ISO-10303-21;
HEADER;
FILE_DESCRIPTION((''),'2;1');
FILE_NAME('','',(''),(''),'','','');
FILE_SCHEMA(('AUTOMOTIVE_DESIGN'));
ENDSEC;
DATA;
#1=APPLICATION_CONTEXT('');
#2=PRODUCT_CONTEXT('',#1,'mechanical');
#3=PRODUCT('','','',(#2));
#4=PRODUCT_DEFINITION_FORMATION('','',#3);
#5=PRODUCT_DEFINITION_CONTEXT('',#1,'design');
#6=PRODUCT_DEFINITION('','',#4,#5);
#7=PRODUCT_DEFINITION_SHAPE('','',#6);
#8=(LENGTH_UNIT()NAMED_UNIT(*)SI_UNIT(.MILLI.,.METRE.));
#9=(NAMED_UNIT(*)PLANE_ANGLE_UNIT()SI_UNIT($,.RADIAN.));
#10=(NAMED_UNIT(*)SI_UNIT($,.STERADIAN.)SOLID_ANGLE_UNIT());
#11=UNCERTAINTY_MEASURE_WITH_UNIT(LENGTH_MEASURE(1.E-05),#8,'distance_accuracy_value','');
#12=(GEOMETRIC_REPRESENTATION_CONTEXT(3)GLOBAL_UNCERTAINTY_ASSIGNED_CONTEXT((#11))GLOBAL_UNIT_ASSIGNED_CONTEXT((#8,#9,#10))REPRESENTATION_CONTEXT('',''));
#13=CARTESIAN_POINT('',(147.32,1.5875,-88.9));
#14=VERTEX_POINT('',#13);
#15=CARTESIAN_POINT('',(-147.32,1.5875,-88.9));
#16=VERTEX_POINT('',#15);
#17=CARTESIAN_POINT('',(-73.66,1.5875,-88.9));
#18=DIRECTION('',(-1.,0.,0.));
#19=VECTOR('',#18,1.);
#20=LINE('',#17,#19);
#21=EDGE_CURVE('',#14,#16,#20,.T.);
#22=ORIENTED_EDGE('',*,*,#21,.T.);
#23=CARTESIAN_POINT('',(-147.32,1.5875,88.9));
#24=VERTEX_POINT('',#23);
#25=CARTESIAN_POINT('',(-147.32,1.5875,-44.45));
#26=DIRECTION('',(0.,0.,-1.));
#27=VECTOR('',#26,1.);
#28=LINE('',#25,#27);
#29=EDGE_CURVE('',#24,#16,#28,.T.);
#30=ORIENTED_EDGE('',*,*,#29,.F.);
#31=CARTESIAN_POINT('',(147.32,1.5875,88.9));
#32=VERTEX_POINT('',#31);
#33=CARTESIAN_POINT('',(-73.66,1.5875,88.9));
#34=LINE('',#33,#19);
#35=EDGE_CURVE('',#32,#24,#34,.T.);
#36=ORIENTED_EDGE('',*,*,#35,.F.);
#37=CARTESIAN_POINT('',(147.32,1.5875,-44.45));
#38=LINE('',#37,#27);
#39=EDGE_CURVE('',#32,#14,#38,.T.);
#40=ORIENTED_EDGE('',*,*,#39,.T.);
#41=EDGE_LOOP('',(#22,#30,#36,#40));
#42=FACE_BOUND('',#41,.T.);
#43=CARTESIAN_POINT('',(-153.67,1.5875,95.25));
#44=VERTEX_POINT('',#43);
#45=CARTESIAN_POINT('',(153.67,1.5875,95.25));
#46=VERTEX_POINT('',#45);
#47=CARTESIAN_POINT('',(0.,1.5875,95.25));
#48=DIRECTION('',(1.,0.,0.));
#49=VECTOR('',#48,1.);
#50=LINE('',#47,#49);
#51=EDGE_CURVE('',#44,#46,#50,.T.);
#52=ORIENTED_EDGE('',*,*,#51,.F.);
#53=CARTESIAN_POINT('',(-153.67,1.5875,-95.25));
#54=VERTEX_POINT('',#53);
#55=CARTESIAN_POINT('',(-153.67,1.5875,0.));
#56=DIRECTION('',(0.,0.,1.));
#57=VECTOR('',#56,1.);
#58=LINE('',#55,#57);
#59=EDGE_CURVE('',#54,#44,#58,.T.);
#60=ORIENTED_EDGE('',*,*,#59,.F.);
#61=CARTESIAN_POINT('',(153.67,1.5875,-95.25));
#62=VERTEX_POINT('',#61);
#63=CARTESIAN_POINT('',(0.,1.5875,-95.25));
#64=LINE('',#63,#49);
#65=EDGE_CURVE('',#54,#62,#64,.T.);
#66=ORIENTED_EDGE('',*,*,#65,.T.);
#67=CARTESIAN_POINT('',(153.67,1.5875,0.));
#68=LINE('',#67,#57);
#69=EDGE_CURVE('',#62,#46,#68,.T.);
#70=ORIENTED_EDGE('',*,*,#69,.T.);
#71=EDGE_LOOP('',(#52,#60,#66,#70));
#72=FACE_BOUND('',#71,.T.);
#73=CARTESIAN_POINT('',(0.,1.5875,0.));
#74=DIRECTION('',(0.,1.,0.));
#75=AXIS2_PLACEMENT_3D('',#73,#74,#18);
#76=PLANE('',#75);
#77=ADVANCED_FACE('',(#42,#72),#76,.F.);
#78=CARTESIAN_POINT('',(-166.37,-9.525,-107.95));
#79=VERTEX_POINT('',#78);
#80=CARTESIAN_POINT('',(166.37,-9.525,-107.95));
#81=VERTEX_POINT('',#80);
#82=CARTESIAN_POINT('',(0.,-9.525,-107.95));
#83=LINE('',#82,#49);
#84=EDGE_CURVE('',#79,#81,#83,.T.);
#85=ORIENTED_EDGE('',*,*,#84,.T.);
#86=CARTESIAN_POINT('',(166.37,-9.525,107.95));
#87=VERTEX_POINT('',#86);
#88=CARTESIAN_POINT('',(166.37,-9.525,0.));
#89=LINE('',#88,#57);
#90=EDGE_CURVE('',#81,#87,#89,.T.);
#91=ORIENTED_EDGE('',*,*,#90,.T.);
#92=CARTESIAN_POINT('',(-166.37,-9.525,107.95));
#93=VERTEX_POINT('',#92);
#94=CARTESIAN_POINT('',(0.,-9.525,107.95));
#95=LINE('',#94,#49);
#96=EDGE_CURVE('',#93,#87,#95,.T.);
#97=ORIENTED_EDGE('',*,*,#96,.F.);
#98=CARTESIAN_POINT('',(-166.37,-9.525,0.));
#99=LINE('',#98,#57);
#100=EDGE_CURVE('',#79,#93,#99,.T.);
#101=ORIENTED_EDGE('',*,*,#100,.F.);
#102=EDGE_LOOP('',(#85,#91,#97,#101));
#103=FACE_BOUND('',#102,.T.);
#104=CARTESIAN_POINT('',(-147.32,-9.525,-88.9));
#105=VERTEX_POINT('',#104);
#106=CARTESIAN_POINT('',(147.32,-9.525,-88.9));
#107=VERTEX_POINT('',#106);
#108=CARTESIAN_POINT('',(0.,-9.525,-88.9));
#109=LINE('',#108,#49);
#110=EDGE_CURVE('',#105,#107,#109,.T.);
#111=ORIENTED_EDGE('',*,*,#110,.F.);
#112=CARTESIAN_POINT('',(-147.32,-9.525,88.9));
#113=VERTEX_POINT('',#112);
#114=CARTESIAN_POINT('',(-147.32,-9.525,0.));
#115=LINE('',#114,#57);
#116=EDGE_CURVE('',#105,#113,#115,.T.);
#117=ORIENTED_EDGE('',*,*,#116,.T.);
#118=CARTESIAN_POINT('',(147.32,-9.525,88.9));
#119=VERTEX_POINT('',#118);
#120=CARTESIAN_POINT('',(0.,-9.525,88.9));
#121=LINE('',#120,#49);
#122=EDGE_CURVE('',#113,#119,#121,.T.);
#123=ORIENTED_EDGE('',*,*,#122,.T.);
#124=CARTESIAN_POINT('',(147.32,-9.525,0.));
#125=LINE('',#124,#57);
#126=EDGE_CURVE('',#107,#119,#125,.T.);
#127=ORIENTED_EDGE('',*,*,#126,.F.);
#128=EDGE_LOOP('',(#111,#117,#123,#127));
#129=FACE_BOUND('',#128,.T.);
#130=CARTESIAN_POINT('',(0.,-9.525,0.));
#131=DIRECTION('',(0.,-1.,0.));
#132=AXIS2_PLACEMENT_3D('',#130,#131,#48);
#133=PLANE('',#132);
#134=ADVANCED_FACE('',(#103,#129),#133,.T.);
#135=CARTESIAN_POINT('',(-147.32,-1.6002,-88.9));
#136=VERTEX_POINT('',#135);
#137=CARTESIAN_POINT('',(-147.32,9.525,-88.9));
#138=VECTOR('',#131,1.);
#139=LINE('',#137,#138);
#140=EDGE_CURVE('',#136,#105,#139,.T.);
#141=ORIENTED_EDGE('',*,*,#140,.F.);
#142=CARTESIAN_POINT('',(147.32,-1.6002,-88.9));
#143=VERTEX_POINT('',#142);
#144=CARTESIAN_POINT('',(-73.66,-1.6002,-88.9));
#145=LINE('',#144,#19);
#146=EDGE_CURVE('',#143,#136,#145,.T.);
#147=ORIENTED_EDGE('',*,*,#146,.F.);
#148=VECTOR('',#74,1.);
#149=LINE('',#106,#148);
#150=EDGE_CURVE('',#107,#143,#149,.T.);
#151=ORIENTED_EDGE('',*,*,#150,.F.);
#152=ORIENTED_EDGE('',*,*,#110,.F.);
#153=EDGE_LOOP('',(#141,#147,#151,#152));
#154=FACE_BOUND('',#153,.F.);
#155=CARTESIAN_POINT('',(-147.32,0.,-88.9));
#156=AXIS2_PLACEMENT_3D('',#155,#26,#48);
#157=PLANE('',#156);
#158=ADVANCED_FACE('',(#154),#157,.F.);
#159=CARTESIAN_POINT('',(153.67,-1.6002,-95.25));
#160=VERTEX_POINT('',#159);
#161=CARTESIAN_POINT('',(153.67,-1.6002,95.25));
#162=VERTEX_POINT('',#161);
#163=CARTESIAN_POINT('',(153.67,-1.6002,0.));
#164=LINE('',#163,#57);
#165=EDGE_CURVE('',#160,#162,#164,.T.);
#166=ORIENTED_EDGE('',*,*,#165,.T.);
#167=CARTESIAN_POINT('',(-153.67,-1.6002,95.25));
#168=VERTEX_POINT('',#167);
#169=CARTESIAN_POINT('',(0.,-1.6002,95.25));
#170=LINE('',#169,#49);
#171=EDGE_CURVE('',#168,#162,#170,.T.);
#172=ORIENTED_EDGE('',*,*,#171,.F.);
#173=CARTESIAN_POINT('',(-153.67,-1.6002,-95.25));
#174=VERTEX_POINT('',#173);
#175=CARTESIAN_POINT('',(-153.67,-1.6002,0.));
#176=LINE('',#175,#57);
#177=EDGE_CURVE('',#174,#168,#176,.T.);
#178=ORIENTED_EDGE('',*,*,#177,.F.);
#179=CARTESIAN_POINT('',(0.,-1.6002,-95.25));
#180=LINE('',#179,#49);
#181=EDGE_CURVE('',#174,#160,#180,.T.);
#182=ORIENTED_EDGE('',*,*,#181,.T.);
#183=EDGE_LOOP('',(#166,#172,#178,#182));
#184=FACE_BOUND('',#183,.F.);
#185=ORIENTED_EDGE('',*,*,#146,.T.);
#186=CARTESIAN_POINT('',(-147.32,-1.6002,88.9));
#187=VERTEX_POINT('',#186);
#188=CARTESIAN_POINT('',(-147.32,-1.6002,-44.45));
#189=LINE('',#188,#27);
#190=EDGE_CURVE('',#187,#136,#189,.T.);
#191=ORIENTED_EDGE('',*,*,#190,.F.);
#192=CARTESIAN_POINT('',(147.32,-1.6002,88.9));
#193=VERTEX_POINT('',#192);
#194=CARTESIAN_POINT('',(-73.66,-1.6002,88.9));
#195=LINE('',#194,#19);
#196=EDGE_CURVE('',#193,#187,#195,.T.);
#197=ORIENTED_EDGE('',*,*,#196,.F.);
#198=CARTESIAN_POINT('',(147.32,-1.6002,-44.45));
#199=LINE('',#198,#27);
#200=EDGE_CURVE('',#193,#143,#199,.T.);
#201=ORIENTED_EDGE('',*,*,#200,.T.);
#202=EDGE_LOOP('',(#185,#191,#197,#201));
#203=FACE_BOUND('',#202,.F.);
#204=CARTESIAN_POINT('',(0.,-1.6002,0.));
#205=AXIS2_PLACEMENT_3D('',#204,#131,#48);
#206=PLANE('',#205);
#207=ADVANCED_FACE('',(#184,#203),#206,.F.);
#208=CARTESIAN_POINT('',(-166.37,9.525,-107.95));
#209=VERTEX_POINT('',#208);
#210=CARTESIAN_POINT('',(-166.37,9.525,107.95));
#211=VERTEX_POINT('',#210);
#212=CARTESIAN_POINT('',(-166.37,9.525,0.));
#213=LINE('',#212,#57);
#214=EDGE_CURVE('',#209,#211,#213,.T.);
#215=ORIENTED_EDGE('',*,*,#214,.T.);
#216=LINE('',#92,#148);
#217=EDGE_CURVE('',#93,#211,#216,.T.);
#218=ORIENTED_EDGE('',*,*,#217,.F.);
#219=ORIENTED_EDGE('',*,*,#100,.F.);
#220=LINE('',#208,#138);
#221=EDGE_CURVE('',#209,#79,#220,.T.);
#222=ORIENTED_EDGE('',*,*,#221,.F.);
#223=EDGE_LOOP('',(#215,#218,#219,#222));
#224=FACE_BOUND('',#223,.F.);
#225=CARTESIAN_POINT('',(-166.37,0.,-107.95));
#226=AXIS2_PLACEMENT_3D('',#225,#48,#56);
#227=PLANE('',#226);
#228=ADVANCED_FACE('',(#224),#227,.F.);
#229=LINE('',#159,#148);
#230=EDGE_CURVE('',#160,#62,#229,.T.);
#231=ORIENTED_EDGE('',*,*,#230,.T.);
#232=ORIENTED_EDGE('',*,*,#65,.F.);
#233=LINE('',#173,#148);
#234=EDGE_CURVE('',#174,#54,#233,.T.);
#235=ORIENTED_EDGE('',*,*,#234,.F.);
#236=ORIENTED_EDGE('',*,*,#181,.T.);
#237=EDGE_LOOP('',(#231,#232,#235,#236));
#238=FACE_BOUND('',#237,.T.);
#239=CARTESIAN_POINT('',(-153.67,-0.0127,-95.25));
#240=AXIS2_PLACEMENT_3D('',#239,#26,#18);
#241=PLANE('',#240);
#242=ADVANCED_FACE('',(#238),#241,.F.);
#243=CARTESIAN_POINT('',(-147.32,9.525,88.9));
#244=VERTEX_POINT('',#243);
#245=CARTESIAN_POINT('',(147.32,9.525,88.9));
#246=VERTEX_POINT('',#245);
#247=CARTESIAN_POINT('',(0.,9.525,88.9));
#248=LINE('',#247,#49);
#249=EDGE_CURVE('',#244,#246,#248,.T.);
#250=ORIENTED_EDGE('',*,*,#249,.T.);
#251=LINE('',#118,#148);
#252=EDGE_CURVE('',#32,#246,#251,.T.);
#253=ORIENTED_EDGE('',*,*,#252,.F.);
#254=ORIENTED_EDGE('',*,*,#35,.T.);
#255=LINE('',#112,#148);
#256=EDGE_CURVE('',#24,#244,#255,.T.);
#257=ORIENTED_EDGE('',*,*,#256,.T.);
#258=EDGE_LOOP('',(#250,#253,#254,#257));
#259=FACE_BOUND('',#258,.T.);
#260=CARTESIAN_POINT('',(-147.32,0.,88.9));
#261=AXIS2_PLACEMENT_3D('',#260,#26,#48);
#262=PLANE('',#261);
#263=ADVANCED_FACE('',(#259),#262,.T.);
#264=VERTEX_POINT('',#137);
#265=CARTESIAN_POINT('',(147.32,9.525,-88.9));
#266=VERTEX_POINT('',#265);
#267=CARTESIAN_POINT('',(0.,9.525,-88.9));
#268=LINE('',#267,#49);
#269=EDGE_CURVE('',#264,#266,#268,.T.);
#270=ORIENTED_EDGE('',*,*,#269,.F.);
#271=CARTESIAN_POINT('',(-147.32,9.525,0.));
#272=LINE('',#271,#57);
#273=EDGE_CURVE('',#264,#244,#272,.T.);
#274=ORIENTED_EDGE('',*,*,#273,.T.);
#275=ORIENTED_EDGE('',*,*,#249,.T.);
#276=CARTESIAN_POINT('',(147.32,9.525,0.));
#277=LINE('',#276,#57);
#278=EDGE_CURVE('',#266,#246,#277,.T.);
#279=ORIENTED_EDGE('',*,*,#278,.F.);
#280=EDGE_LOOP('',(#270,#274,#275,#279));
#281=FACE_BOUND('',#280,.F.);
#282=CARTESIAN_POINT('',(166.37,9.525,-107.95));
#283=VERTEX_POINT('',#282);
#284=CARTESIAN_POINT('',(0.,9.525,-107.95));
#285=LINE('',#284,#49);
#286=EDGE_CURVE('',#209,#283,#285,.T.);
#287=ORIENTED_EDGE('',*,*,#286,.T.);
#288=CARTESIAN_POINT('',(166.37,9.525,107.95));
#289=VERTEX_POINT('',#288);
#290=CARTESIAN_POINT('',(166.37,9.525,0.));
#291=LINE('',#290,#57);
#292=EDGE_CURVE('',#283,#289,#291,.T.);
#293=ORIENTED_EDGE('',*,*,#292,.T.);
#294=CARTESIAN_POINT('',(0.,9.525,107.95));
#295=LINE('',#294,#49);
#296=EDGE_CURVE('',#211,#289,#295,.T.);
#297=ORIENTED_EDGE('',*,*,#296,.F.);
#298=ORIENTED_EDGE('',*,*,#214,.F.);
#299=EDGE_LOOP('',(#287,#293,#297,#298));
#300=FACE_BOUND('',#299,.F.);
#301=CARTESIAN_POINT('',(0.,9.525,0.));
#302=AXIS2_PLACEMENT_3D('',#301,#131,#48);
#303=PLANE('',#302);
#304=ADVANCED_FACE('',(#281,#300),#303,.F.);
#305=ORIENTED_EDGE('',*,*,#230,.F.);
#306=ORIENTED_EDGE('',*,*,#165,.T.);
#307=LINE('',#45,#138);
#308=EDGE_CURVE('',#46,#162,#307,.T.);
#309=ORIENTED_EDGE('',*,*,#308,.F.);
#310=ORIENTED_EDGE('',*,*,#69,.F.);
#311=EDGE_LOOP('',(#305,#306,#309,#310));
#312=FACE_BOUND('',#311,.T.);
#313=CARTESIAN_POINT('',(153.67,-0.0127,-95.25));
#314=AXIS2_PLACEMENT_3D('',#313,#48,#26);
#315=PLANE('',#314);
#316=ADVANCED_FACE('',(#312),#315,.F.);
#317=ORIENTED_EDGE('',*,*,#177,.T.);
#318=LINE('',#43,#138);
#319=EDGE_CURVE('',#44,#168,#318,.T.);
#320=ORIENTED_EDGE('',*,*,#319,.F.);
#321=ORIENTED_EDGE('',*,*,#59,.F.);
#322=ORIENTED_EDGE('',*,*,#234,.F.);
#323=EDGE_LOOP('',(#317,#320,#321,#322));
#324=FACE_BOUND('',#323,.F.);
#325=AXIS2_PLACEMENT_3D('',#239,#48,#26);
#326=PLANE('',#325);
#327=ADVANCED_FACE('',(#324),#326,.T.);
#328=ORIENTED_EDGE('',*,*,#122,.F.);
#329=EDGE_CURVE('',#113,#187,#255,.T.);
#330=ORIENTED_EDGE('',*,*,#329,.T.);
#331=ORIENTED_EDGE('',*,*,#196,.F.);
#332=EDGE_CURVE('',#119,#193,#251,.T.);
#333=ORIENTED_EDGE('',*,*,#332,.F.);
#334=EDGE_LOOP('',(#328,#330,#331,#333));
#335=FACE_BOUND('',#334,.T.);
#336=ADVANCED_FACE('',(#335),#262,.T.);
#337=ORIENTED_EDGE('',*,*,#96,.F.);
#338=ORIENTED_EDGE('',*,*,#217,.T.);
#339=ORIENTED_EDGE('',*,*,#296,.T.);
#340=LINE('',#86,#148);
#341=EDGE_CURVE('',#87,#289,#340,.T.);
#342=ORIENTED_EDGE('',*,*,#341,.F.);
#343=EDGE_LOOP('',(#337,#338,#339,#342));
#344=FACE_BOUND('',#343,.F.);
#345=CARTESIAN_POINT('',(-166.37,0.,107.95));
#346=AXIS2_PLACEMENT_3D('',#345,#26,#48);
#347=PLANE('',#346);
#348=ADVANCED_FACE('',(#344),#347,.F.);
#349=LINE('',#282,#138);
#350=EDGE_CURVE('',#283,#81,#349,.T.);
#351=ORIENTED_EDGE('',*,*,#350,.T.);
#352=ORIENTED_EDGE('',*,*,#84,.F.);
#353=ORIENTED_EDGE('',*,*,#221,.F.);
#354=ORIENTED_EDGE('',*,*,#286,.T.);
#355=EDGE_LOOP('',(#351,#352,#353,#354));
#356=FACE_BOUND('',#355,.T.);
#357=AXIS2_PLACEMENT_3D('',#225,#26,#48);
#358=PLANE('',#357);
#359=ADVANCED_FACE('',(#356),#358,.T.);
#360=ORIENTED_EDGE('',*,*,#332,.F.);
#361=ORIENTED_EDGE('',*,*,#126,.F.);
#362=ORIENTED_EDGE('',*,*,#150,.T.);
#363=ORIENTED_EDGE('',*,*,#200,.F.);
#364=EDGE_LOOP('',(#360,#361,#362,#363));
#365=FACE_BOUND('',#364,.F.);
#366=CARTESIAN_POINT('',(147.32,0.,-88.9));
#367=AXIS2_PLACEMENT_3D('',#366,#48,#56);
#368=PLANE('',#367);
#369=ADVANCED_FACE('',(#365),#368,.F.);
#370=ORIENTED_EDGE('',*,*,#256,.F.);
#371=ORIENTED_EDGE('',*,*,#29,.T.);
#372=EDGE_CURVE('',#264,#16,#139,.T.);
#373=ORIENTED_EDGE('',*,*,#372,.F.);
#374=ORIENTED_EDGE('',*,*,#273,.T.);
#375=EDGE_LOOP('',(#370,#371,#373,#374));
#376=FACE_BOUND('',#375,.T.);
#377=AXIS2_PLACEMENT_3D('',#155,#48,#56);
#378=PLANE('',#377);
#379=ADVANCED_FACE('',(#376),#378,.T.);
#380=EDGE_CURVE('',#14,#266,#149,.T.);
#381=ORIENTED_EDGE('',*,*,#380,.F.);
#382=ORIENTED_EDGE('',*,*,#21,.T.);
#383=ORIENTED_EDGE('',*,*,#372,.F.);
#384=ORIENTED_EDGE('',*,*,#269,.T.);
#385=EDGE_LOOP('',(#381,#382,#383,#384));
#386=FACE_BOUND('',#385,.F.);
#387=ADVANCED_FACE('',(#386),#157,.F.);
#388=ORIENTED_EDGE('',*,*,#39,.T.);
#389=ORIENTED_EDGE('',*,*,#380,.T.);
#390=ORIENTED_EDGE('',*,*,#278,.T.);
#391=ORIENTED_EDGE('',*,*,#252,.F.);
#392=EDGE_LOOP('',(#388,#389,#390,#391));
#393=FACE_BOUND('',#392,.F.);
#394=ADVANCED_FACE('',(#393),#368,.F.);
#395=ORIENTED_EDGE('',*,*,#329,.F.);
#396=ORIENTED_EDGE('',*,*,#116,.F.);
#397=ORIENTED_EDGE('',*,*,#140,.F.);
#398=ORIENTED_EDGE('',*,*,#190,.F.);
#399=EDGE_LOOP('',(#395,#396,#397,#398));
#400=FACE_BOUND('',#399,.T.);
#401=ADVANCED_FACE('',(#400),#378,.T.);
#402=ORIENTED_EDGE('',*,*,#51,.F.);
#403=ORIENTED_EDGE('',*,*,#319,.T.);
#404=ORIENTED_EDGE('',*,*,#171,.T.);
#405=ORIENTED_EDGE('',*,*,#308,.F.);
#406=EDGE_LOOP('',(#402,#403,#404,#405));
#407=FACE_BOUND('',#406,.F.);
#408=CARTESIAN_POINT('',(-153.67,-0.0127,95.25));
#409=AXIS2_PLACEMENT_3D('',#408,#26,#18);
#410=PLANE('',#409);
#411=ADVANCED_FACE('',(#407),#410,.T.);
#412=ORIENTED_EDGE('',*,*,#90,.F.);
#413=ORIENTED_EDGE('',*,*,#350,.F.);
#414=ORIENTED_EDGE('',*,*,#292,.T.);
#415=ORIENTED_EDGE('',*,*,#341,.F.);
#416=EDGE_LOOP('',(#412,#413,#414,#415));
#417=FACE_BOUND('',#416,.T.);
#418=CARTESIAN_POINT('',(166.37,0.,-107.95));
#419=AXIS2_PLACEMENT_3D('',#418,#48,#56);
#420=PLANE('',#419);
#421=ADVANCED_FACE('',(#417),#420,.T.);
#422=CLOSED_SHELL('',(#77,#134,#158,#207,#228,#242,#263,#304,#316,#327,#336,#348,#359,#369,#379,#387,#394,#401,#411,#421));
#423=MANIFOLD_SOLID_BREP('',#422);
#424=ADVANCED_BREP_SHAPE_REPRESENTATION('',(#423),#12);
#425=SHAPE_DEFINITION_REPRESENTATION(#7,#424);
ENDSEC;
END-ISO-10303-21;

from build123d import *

# Parameters (mm, degrees)
F0_W          = 332.74
F0_H          = 215.9
F0_W_2        = 294.64
F0_H_2        = 177.8
F1_DEPTH      = 9.525
F1_DEPTH_BACK = 9.525
F2_W          = 307.34
F2_H          = 190.5
F3_DEPTH      = 0.0625
F3_DEPTH_BACK = 1.6002


# Not quite as in the source:
# - a pattern or mirror of a feature is missing from the dataset's text; its kind, count and spacing are read off the source's solid


with BuildPart() as f1:
    # F0 (on Front) → F1 (new body, two sides)
    with BuildSketch(Plane.XZ) as f1_sk:
        Rectangle(F0_W, F0_H)
        Rectangle(F0_W_2, F0_H_2, mode=Mode.SUBTRACT)
    extrude(amount=F1_DEPTH)
    extrude(f1_sk.sketch, amount=-F1_DEPTH_BACK)

    # F2 (on Front) → F3 (cut, two sides)
    with BuildSketch(Plane.XZ) as f3_sk:
        Rectangle(F2_W, F2_H)
    f3 = extrude(amount=-F3_DEPTH, mode=Mode.SUBTRACT) + extrude(f3_sk.sketch, amount=F3_DEPTH_BACK, mode=Mode.SUBTRACT)

    # F3_copies: F3 across plane
    add(f3.mirror(Plane.ZX.offset(-0.00635)), mode=Mode.SUBTRACT)


solid = f1.part
